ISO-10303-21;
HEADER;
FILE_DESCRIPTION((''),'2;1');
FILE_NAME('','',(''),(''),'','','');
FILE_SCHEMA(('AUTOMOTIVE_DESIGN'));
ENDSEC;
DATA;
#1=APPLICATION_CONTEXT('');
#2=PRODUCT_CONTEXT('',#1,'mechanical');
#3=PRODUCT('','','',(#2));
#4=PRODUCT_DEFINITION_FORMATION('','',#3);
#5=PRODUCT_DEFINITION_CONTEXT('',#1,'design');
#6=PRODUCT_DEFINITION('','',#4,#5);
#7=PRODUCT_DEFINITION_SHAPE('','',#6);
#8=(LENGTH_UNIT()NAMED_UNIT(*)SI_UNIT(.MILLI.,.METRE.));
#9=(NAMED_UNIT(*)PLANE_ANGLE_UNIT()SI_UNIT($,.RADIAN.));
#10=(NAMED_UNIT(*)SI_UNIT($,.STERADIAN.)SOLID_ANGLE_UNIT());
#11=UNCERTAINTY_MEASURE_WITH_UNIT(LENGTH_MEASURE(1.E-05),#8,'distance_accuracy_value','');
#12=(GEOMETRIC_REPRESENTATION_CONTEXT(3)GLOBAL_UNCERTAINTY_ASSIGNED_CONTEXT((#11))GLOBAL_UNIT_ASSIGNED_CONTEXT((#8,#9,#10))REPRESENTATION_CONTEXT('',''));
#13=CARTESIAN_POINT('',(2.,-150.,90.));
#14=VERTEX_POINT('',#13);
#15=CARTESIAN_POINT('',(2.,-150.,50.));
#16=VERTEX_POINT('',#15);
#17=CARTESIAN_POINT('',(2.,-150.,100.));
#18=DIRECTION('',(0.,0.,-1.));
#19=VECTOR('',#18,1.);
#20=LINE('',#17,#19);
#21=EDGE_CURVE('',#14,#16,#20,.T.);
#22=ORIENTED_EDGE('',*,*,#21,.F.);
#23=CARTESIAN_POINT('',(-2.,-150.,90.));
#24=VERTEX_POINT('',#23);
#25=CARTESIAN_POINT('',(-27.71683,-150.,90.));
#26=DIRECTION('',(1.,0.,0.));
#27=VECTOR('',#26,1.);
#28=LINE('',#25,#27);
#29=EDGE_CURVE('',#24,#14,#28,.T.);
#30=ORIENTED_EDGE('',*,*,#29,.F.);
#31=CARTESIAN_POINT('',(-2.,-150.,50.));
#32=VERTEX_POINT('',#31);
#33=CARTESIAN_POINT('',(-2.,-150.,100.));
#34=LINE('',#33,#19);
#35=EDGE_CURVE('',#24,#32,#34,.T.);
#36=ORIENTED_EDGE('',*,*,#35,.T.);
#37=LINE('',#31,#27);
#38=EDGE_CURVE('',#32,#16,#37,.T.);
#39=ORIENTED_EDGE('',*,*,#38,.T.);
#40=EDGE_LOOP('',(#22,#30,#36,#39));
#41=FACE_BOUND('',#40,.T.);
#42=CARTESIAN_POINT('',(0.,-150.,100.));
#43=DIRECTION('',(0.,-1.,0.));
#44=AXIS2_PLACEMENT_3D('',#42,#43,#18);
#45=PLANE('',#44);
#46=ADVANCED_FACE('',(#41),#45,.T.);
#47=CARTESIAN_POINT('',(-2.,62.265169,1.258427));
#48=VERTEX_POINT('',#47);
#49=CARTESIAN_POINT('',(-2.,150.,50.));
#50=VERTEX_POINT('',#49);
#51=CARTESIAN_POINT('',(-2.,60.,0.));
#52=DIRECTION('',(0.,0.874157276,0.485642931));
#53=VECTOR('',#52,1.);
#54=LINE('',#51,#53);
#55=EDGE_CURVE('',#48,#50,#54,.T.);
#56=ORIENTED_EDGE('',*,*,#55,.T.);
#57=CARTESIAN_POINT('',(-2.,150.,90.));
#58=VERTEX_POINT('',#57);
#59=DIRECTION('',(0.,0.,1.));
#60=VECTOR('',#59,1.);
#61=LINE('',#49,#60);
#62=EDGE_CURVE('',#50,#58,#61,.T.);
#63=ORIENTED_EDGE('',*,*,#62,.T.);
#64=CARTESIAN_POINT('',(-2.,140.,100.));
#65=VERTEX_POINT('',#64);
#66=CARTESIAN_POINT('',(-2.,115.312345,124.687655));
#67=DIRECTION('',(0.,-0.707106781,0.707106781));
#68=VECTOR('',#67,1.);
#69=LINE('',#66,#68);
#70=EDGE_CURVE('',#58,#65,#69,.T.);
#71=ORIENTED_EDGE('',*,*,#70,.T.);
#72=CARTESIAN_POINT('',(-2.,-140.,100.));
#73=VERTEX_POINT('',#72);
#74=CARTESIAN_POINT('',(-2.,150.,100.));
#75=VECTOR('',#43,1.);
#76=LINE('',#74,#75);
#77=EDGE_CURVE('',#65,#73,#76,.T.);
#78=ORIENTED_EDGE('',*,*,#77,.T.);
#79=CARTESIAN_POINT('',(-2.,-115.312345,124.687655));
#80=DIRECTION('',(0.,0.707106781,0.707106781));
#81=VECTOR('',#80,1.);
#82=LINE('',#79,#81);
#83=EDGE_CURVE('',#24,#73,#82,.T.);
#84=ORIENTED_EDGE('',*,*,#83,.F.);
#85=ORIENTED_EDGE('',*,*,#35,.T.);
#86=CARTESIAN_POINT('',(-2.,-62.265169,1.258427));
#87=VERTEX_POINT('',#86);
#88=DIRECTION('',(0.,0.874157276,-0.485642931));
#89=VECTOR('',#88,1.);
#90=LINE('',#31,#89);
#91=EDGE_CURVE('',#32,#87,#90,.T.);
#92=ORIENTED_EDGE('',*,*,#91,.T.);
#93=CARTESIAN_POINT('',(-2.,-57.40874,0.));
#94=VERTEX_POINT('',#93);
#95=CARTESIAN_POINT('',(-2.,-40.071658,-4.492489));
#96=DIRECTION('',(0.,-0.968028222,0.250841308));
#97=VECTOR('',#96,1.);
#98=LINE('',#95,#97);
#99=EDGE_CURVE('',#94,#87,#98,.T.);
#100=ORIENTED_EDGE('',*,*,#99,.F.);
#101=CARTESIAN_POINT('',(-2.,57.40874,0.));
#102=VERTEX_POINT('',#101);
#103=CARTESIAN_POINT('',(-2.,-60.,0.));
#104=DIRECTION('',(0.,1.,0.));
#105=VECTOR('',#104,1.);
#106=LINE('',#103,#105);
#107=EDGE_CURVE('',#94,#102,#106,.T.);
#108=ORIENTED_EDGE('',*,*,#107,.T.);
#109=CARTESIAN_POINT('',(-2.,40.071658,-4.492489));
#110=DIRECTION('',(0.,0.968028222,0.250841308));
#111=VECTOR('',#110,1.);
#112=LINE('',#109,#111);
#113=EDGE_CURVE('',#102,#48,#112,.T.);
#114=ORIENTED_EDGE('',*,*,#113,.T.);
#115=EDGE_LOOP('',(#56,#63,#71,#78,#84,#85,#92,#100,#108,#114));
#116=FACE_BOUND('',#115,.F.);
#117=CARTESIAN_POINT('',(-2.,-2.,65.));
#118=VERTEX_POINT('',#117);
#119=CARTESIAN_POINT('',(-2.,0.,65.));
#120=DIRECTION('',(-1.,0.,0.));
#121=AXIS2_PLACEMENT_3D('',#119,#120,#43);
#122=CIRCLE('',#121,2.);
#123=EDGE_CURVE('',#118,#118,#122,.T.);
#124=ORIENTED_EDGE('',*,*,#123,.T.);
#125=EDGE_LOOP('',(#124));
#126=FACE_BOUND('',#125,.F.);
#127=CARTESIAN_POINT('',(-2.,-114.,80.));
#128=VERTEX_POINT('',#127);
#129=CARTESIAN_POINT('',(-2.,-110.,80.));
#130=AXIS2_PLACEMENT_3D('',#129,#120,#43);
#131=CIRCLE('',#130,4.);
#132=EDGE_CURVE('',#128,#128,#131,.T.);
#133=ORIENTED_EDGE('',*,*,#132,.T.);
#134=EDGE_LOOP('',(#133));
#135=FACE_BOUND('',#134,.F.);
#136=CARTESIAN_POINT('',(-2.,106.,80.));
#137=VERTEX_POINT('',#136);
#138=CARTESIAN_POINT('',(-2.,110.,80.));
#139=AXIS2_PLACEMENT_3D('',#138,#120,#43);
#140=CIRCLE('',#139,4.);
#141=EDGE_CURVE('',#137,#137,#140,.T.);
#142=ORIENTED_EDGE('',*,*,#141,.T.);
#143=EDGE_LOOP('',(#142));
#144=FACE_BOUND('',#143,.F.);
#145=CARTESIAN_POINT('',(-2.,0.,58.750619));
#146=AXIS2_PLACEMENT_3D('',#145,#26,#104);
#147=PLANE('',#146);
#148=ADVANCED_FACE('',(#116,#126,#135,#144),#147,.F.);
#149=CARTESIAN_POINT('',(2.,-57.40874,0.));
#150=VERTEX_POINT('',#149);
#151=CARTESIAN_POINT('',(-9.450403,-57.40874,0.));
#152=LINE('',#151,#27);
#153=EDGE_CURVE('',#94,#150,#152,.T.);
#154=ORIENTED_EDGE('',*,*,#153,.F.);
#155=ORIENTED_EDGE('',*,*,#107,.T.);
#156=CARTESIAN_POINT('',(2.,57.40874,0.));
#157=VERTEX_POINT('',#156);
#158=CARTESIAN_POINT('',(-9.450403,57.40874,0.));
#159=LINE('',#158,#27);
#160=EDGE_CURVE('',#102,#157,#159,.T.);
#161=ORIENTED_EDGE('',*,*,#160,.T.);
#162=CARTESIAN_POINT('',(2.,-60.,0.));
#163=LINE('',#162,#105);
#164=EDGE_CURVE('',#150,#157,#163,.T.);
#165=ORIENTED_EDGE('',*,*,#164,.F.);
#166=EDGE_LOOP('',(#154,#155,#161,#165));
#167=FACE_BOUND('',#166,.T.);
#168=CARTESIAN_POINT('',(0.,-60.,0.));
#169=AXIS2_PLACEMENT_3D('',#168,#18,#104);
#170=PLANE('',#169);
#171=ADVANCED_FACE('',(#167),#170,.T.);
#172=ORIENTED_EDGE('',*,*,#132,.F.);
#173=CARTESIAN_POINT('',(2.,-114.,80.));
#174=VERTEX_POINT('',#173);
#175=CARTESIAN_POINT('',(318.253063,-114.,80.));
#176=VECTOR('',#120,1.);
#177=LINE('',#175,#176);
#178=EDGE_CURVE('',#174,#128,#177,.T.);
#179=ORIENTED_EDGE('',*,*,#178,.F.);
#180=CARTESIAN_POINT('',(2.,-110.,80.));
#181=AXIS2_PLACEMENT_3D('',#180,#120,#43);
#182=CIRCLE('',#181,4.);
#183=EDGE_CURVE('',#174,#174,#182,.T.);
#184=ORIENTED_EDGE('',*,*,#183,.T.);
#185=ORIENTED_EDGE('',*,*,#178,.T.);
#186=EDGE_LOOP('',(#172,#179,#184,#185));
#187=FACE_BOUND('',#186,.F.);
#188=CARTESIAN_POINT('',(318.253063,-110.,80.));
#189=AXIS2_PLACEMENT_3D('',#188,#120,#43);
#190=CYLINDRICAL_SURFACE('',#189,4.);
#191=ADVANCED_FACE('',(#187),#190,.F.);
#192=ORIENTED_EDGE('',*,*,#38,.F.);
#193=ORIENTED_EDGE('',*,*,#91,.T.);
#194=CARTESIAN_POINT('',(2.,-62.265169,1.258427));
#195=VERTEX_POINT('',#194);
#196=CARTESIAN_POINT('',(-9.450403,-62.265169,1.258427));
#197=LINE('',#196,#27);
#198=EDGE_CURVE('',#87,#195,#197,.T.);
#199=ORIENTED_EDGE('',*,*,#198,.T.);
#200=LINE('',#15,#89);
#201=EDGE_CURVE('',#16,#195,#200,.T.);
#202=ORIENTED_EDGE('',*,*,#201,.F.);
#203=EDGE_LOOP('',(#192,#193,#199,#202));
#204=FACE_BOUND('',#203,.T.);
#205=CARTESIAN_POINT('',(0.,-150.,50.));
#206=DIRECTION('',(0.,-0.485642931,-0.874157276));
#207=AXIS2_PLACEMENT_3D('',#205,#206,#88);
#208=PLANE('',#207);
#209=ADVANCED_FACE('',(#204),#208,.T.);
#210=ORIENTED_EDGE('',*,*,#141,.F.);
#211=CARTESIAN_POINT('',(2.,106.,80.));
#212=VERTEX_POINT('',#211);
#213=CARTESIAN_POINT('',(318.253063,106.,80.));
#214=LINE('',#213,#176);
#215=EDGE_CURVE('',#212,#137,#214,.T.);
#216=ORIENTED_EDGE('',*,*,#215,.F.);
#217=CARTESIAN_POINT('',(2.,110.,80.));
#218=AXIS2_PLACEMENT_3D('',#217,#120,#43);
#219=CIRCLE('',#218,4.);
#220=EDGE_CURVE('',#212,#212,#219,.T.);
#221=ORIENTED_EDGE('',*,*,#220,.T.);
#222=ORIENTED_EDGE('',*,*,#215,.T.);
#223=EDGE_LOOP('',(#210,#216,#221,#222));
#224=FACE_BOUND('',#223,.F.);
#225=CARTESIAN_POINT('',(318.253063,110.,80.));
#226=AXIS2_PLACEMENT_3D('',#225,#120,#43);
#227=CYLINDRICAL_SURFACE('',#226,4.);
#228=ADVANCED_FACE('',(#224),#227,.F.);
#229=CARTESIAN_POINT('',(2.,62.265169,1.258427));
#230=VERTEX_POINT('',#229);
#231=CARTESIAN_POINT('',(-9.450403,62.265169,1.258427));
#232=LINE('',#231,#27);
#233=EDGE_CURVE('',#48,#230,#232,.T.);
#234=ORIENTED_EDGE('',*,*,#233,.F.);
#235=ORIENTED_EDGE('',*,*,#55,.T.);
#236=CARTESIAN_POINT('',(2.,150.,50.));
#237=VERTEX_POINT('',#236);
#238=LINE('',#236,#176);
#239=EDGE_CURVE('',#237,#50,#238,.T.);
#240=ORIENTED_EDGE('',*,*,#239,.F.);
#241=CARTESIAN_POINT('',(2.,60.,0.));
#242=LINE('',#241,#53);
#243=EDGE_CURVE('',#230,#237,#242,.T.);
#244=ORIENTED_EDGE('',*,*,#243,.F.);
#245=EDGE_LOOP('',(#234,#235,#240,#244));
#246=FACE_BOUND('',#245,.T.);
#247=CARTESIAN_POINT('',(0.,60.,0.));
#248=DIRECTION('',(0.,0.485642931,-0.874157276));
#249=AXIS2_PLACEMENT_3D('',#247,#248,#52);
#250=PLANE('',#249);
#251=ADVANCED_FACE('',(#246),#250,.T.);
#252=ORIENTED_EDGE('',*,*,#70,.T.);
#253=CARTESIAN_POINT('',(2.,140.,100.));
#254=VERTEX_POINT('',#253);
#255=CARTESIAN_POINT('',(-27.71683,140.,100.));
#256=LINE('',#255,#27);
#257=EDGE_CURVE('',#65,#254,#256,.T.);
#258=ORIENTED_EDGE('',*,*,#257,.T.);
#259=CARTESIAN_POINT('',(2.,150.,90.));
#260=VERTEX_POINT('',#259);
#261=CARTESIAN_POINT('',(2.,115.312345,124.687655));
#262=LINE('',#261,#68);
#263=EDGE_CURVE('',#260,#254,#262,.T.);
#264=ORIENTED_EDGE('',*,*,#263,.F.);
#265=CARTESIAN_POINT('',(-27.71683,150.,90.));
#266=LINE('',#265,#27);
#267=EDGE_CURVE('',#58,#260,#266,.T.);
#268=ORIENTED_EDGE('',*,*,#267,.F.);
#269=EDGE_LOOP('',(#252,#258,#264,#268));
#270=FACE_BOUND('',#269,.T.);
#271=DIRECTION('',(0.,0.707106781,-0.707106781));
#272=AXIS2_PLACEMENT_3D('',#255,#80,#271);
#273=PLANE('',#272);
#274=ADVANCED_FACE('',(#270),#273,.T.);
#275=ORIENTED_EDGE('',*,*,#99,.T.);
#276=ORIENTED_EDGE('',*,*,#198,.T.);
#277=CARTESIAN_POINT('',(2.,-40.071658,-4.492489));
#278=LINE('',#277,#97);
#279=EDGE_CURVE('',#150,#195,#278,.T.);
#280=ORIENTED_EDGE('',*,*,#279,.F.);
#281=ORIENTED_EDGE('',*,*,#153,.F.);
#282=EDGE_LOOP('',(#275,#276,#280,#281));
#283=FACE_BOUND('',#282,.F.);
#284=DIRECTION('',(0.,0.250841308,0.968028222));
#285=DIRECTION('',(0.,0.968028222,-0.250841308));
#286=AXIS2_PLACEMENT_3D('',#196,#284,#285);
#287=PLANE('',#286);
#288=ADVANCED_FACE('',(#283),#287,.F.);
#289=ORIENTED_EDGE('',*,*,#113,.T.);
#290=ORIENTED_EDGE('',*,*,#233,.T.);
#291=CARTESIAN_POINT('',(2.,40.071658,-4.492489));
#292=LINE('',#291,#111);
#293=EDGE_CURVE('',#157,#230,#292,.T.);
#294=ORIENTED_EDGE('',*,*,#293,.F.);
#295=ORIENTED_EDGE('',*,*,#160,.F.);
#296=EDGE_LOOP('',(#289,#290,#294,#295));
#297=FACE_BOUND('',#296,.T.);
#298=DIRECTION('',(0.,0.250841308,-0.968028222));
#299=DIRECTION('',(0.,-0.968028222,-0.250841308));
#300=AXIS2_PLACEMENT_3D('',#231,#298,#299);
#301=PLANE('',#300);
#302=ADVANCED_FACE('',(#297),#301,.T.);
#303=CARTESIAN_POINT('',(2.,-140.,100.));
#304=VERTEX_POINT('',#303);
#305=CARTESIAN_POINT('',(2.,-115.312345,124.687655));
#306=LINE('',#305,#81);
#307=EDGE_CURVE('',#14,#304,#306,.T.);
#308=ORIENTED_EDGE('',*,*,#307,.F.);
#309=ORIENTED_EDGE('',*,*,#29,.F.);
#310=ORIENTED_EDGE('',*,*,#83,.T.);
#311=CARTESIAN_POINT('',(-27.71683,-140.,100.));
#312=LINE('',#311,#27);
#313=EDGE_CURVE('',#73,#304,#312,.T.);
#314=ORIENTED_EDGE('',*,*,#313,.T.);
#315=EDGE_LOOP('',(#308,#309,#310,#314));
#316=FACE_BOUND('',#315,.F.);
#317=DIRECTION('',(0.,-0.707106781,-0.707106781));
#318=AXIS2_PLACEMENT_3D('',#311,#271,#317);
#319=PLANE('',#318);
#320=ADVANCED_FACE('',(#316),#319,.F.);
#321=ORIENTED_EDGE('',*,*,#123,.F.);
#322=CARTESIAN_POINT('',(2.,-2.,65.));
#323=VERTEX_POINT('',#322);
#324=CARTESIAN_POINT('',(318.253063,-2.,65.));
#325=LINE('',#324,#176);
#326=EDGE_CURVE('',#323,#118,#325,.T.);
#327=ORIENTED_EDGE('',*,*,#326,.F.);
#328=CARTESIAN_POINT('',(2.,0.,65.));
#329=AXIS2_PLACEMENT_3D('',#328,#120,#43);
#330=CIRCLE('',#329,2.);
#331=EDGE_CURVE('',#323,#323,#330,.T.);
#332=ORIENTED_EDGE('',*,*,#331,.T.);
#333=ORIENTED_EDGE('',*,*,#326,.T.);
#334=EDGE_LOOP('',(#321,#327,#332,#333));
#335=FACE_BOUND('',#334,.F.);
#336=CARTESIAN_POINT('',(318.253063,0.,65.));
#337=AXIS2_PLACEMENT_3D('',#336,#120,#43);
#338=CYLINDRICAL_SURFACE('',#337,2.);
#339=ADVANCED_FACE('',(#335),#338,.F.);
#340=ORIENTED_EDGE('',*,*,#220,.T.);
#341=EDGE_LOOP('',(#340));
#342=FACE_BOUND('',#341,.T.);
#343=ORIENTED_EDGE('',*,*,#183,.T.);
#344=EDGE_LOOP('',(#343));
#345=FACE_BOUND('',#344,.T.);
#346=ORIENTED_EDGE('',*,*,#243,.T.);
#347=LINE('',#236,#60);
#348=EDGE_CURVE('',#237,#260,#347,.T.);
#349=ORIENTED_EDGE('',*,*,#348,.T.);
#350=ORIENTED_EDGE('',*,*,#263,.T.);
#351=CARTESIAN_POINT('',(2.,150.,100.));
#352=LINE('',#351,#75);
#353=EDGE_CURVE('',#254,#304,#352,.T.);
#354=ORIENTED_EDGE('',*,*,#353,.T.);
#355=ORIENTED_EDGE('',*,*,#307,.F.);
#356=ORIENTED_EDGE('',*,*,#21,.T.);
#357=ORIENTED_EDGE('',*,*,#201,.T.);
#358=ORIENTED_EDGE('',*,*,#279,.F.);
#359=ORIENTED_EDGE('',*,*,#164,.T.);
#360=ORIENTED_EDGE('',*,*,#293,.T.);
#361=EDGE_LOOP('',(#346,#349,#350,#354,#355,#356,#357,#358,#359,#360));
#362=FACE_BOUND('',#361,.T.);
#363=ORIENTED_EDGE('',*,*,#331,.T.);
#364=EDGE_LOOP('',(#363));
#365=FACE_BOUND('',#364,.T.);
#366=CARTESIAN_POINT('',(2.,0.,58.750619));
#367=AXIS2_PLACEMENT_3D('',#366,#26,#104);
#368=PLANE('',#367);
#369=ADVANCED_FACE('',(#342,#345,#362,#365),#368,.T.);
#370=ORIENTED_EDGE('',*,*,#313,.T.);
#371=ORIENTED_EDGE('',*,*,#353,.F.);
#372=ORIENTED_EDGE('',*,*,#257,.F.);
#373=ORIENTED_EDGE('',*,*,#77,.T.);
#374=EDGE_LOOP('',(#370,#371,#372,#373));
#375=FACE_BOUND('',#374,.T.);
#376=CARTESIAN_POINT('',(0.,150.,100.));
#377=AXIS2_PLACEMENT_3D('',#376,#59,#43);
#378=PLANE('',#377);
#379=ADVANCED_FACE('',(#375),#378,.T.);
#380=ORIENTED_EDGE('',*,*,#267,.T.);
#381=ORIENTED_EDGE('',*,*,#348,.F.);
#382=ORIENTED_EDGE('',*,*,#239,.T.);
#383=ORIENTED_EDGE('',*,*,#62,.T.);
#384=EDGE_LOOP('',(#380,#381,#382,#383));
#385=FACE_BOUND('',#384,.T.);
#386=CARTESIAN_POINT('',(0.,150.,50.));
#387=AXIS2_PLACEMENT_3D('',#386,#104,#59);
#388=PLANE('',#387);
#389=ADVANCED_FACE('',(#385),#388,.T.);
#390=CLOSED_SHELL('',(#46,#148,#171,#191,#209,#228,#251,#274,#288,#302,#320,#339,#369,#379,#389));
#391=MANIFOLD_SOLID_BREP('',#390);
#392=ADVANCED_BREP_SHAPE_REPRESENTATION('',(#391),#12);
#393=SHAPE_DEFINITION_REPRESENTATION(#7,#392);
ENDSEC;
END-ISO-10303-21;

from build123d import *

# Parameters (mm, degrees)
F1_DEPTH    = 2
F3_D        = 8
F5_T1_DEPTH = 55.4336597593
F5_T3_DEPTH = 18.9008056118
F6_D        = 4


# Not quite as in the source:
# - a fillet or chamfer that OpenCascade refuses, or shapes differently, is made with other operations: its cross-section is extruded or revolved along the edge and cut away or added
# - a feature of the source that left no trace in its solid (it failed there, or was rolled back) is left out


with BuildPart() as f1:
    # F0 (on Right) → F1 (new body, symmetric)
    with BuildSketch(Plane.YZ):
        Polygon((150, 100), (-150, 100), (-150, 50), (-60, 0), (60, 0), (150, 50), align=None)
    extrude(amount=F1_DEPTH, both=True)

    # F3 (through all)
    with Locations(Plane.YZ.offset(2)):
        with Locations((-110, 80), (110, 80)):
            Hole(F3_D / 2)

    # F5: chamfer of 10 on 4 edges, made by hand

    # F5_s2 → F5_t1 (cut)
    with BuildSketch(Plane.YZ.offset(-27.7168298797)):
        Polygon((140, 100), (150, 90), (150, 100), align=None)
        Polygon((-140, 100), (-150, 90), (-150, 100), align=None)
    extrude(amount=F5_T1_DEPTH, mode=Mode.SUBTRACT)

    # F5_s4 → F5_t3 (cut)
    with BuildSketch(Plane.YZ.offset(-9.4504028059)):
        Polygon((-62.2651690298, 1.2584272388), (-57.408739718, 0), (-60, 0), align=None)
        Polygon((62.2651690298, 1.2584272388), (57.408739718, 0), (60, 0), align=None)
    extrude(amount=F5_T3_DEPTH, mode=Mode.SUBTRACT)

    # F6 (through all)
    with Locations(Plane.YZ.offset(2)):
        with Locations((0, 65)):
            Hole(F6_D / 2)


solid = f1.part
